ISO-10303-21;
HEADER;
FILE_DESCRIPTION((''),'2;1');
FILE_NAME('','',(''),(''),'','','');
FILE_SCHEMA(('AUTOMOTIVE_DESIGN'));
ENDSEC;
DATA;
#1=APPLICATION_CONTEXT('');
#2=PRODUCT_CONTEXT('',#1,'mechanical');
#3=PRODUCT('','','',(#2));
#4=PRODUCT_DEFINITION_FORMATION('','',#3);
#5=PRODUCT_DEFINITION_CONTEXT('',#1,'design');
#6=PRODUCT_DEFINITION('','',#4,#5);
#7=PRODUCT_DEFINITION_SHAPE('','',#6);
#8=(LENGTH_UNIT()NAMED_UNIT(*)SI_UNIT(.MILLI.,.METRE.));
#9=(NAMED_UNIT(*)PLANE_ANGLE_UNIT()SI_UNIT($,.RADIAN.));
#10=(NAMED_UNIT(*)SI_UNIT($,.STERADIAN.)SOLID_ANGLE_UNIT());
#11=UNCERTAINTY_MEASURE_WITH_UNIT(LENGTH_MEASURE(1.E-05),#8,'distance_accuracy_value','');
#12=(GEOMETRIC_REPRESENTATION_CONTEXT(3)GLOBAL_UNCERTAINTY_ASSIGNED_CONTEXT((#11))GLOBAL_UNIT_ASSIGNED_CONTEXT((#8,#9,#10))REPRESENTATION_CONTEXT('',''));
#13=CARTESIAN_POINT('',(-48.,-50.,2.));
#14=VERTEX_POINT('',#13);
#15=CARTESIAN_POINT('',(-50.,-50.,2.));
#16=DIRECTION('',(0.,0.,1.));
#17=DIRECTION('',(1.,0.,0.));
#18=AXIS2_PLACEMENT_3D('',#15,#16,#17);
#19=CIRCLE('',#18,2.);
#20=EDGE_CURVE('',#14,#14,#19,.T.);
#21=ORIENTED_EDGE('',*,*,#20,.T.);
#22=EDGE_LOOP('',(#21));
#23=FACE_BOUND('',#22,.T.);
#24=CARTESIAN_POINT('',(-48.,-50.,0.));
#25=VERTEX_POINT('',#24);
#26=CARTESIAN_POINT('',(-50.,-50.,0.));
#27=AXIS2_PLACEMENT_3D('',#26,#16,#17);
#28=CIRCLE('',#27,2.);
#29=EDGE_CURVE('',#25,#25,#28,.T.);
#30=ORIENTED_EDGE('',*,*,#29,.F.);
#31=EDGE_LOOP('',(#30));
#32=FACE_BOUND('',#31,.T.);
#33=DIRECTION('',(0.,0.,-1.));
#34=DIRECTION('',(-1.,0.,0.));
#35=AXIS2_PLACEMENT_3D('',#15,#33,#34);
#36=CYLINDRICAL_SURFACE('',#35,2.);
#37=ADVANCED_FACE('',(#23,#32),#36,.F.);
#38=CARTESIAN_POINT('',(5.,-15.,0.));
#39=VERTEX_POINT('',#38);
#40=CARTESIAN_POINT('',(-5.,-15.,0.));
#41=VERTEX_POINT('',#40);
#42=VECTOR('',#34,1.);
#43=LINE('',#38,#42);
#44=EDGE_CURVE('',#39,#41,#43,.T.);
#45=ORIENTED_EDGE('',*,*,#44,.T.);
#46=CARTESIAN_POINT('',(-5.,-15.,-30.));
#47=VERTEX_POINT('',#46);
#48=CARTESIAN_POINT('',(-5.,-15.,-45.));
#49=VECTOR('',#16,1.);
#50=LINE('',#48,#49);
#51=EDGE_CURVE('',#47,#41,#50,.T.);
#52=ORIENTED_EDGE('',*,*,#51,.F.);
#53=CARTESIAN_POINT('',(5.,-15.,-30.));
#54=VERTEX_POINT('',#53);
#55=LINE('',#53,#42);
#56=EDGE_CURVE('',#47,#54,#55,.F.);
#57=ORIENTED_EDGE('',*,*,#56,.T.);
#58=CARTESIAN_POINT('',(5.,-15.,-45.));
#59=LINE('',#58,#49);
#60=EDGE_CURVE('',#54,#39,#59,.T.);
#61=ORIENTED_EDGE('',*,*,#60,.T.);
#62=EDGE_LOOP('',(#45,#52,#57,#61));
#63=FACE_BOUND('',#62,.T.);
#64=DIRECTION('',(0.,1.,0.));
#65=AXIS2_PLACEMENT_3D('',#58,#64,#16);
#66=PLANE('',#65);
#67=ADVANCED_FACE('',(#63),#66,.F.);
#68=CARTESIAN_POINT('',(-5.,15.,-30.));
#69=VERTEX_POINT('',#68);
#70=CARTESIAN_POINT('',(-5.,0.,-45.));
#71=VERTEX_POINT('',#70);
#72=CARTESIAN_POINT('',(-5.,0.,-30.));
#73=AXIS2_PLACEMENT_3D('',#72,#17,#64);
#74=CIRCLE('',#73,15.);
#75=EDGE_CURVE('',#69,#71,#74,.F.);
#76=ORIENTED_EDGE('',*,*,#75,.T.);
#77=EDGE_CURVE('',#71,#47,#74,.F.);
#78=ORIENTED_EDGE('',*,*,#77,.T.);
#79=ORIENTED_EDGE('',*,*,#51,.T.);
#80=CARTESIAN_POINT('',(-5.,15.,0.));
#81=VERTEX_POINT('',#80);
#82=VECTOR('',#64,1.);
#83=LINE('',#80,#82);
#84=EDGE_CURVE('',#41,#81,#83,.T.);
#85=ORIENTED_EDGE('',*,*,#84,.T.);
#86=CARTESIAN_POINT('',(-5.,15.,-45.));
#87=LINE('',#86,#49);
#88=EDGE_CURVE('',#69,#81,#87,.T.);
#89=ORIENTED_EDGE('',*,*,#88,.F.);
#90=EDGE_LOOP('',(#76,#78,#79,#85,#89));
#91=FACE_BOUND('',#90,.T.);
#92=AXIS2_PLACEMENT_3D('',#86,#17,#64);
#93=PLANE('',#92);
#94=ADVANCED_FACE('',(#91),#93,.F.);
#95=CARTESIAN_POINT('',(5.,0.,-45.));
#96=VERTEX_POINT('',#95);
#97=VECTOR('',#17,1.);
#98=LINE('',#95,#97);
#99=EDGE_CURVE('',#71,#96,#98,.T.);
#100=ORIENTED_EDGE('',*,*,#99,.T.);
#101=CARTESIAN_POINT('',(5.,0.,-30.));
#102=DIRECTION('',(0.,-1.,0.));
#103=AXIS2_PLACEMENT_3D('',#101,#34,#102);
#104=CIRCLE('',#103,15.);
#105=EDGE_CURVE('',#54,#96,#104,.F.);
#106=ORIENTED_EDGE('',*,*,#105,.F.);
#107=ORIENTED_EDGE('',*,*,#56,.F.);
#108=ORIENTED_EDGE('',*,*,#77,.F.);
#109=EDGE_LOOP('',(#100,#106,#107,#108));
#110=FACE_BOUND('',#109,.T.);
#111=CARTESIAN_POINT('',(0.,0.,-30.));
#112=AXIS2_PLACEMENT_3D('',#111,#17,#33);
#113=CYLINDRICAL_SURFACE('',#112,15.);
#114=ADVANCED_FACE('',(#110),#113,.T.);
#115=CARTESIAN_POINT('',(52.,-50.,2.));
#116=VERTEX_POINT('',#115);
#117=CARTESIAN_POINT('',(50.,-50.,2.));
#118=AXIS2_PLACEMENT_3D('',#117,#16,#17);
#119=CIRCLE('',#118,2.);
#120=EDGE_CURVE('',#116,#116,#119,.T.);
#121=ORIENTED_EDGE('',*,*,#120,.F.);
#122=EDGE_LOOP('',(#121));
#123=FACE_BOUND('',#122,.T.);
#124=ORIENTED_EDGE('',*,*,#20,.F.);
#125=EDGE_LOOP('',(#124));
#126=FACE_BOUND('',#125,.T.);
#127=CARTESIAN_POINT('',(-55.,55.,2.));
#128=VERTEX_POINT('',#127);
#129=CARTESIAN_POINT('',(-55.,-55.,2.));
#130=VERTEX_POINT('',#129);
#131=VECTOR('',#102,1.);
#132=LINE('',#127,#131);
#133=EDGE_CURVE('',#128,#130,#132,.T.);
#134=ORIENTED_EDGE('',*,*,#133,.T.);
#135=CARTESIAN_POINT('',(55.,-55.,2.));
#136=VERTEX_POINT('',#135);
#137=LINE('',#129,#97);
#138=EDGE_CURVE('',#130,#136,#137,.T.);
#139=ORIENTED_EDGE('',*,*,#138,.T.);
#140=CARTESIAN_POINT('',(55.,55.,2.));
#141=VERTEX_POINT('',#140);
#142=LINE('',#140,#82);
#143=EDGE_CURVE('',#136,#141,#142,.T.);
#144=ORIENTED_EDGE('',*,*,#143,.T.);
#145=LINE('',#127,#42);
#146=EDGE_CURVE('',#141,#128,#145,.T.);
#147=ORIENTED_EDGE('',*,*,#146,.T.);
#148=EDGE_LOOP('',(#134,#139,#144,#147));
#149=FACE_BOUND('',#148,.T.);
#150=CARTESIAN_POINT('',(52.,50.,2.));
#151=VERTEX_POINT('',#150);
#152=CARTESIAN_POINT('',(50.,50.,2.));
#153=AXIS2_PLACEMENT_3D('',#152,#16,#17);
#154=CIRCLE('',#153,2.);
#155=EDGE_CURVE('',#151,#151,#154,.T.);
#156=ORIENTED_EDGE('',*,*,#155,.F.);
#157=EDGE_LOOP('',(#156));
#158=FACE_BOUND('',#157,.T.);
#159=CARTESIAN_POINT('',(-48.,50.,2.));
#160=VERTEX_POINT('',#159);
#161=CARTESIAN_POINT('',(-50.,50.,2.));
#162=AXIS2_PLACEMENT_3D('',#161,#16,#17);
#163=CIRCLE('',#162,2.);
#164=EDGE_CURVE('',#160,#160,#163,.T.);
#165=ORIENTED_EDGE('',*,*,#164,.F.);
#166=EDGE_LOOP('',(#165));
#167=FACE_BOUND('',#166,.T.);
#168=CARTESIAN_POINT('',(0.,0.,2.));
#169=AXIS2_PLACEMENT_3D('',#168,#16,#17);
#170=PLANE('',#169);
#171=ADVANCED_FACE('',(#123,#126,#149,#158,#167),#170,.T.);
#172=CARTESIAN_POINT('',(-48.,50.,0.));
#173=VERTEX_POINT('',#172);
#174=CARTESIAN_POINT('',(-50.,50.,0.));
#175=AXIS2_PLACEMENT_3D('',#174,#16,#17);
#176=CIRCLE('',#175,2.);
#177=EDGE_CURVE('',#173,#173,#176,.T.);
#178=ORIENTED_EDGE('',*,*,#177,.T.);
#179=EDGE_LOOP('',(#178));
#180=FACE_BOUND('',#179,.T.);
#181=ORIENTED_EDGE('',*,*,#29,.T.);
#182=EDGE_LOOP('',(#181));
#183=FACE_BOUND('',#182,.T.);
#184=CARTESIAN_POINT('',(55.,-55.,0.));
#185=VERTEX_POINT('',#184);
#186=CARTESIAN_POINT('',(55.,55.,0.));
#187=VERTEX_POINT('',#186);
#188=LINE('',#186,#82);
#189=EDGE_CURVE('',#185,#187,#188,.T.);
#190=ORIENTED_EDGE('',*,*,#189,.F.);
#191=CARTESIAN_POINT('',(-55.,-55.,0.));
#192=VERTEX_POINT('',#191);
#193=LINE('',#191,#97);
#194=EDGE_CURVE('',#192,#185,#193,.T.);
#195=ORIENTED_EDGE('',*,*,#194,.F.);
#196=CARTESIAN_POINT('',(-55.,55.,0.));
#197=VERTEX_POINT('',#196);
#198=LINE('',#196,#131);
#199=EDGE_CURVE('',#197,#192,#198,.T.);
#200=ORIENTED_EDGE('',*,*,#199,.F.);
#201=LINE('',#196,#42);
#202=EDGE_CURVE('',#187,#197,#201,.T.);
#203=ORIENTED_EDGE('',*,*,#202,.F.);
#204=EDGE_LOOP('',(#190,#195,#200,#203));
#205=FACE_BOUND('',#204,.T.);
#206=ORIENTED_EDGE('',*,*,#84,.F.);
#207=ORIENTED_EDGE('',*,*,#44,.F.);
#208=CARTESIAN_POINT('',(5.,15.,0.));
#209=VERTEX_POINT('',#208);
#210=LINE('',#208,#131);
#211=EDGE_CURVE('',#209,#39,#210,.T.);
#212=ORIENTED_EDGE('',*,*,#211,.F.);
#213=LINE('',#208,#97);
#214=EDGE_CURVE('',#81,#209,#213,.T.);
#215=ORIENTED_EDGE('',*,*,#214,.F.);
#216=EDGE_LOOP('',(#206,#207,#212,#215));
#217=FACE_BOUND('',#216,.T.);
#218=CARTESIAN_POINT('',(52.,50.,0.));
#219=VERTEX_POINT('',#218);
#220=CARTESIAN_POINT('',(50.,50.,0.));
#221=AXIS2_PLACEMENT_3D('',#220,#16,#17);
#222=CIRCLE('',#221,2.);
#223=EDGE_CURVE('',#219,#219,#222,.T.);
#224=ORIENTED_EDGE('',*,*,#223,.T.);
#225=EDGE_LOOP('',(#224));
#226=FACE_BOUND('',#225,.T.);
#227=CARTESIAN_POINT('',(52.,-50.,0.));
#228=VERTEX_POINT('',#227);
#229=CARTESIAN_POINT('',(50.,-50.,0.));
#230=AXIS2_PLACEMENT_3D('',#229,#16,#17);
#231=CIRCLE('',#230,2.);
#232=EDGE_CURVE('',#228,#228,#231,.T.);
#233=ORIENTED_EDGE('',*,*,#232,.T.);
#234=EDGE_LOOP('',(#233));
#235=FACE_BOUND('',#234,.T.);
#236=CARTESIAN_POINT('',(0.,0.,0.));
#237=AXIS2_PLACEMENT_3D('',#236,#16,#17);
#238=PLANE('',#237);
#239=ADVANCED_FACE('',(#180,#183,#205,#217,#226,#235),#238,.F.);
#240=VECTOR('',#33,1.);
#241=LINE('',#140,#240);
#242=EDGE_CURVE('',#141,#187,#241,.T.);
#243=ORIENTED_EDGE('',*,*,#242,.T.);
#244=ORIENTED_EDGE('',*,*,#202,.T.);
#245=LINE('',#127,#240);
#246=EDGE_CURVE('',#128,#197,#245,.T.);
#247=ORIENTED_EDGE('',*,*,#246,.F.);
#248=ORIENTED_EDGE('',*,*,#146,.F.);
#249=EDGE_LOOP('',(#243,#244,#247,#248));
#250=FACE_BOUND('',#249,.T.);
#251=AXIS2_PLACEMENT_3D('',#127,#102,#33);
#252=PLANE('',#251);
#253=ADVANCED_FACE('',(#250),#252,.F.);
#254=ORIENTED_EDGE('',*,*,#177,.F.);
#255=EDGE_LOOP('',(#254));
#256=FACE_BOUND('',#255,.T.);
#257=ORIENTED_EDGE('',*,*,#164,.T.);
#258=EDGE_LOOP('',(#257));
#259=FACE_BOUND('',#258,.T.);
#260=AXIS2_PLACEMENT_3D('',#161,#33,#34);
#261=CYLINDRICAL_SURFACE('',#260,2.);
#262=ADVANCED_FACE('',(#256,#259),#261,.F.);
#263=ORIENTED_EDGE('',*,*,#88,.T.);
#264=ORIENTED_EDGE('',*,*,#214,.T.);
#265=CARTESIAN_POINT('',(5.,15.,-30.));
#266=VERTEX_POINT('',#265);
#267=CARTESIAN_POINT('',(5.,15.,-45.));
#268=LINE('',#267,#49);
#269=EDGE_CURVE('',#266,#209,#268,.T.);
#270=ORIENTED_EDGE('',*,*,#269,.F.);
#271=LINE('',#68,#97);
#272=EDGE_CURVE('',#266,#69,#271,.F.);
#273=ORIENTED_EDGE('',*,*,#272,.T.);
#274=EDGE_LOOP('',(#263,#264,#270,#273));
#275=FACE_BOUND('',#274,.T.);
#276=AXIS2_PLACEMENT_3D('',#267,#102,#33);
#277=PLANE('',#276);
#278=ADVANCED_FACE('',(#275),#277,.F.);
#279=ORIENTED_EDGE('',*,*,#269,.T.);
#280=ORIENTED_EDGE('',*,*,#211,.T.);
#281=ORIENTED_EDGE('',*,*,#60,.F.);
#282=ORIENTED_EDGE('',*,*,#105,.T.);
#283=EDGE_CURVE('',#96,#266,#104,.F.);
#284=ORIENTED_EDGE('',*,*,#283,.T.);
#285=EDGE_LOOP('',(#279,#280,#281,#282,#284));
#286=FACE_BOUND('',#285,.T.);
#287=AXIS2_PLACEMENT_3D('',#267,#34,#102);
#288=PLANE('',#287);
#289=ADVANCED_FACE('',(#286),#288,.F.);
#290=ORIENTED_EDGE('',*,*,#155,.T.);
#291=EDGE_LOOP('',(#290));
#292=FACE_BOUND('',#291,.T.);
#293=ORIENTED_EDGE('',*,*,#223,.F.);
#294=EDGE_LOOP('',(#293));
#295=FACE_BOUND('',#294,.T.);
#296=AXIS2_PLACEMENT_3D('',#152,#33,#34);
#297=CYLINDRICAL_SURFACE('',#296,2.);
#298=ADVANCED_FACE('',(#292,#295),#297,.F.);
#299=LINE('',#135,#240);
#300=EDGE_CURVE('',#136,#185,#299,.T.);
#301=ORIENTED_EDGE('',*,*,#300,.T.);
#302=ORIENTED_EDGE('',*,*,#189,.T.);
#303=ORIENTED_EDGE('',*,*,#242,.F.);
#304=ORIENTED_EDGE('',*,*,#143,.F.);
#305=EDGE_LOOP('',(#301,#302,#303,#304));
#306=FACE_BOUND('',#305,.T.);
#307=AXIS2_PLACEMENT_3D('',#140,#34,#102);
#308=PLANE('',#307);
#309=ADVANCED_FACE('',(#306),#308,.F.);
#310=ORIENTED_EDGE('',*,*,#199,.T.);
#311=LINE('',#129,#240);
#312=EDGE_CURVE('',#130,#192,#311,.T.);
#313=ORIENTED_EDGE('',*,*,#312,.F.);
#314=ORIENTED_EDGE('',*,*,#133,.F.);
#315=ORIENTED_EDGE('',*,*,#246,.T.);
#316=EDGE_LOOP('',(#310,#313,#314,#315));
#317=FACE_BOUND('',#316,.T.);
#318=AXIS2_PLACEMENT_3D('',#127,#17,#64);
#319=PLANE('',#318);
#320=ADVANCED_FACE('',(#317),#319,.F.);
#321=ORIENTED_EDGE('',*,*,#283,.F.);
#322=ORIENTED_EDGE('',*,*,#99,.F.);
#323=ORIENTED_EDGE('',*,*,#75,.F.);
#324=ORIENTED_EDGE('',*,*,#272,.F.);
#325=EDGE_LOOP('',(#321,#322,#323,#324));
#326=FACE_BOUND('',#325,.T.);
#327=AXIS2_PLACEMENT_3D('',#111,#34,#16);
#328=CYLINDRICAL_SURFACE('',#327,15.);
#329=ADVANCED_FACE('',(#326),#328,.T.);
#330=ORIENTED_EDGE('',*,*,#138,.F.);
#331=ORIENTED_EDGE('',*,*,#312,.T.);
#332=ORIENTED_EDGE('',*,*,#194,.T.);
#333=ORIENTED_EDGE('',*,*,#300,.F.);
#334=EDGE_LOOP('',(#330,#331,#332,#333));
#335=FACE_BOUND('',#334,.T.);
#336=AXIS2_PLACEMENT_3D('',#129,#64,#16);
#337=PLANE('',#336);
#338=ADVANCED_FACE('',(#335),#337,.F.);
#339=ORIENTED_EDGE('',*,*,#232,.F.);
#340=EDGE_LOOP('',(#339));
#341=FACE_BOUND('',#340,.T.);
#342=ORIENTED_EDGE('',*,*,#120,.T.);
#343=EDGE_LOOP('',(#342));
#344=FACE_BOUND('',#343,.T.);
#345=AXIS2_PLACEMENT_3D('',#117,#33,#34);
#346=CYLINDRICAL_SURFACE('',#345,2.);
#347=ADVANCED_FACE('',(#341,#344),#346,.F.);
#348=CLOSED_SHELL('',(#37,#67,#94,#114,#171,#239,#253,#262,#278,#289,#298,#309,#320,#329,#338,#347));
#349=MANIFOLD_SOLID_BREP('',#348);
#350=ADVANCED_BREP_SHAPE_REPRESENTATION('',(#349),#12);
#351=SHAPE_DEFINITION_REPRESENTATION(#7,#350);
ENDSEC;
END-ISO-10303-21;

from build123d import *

# Parameters (mm, degrees)
SKETCH1_W           = 110
SKETCH1_H           = 110
SKETCH1_R           = 2
BOSS_EXTRUDE1_DEPTH = 2
SKETCH3_W           = 10
SKETCH3_H           = 30
BOSS_EXTRUDE2_DEPTH = 45
FILLET1_R           = 15


with BuildPart() as part:
    # Sketch1 → Boss-Extrude1 (new body)
    with BuildSketch(Plane.XY):
        Rectangle(SKETCH1_W, SKETCH1_H)
        with Locations((-50, 50)):
            Circle(SKETCH1_R, mode=Mode.SUBTRACT)
        with Locations((-50, -50)):
            Circle(SKETCH1_R, mode=Mode.SUBTRACT)
        with Locations((50, -50)):
            Circle(SKETCH1_R, mode=Mode.SUBTRACT)
        with Locations((50, 50)):
            Circle(SKETCH1_R, mode=Mode.SUBTRACT)
    extrude(amount=BOSS_EXTRUDE1_DEPTH)

    # Sketch3 → Boss-Extrude2 (add)
    with BuildSketch(Plane(origin=(0, 0, 0), x_dir=(-1, 0, 0), z_dir=(0, 0, -1))):
        Rectangle(SKETCH3_W, SKETCH3_H)
    extrude(amount=BOSS_EXTRUDE2_DEPTH)

    # Fillet1
    fillet1_edges = [part.edges().sort_by_distance(p)[0] for p in [
        (0, -15, -45),
        (0, 15, -45),
    ]]
    fillet(fillet1_edges, radius=FILLET1_R - 0.0001)  # a hair under: the kernel refuses the full size


solid = part.part
